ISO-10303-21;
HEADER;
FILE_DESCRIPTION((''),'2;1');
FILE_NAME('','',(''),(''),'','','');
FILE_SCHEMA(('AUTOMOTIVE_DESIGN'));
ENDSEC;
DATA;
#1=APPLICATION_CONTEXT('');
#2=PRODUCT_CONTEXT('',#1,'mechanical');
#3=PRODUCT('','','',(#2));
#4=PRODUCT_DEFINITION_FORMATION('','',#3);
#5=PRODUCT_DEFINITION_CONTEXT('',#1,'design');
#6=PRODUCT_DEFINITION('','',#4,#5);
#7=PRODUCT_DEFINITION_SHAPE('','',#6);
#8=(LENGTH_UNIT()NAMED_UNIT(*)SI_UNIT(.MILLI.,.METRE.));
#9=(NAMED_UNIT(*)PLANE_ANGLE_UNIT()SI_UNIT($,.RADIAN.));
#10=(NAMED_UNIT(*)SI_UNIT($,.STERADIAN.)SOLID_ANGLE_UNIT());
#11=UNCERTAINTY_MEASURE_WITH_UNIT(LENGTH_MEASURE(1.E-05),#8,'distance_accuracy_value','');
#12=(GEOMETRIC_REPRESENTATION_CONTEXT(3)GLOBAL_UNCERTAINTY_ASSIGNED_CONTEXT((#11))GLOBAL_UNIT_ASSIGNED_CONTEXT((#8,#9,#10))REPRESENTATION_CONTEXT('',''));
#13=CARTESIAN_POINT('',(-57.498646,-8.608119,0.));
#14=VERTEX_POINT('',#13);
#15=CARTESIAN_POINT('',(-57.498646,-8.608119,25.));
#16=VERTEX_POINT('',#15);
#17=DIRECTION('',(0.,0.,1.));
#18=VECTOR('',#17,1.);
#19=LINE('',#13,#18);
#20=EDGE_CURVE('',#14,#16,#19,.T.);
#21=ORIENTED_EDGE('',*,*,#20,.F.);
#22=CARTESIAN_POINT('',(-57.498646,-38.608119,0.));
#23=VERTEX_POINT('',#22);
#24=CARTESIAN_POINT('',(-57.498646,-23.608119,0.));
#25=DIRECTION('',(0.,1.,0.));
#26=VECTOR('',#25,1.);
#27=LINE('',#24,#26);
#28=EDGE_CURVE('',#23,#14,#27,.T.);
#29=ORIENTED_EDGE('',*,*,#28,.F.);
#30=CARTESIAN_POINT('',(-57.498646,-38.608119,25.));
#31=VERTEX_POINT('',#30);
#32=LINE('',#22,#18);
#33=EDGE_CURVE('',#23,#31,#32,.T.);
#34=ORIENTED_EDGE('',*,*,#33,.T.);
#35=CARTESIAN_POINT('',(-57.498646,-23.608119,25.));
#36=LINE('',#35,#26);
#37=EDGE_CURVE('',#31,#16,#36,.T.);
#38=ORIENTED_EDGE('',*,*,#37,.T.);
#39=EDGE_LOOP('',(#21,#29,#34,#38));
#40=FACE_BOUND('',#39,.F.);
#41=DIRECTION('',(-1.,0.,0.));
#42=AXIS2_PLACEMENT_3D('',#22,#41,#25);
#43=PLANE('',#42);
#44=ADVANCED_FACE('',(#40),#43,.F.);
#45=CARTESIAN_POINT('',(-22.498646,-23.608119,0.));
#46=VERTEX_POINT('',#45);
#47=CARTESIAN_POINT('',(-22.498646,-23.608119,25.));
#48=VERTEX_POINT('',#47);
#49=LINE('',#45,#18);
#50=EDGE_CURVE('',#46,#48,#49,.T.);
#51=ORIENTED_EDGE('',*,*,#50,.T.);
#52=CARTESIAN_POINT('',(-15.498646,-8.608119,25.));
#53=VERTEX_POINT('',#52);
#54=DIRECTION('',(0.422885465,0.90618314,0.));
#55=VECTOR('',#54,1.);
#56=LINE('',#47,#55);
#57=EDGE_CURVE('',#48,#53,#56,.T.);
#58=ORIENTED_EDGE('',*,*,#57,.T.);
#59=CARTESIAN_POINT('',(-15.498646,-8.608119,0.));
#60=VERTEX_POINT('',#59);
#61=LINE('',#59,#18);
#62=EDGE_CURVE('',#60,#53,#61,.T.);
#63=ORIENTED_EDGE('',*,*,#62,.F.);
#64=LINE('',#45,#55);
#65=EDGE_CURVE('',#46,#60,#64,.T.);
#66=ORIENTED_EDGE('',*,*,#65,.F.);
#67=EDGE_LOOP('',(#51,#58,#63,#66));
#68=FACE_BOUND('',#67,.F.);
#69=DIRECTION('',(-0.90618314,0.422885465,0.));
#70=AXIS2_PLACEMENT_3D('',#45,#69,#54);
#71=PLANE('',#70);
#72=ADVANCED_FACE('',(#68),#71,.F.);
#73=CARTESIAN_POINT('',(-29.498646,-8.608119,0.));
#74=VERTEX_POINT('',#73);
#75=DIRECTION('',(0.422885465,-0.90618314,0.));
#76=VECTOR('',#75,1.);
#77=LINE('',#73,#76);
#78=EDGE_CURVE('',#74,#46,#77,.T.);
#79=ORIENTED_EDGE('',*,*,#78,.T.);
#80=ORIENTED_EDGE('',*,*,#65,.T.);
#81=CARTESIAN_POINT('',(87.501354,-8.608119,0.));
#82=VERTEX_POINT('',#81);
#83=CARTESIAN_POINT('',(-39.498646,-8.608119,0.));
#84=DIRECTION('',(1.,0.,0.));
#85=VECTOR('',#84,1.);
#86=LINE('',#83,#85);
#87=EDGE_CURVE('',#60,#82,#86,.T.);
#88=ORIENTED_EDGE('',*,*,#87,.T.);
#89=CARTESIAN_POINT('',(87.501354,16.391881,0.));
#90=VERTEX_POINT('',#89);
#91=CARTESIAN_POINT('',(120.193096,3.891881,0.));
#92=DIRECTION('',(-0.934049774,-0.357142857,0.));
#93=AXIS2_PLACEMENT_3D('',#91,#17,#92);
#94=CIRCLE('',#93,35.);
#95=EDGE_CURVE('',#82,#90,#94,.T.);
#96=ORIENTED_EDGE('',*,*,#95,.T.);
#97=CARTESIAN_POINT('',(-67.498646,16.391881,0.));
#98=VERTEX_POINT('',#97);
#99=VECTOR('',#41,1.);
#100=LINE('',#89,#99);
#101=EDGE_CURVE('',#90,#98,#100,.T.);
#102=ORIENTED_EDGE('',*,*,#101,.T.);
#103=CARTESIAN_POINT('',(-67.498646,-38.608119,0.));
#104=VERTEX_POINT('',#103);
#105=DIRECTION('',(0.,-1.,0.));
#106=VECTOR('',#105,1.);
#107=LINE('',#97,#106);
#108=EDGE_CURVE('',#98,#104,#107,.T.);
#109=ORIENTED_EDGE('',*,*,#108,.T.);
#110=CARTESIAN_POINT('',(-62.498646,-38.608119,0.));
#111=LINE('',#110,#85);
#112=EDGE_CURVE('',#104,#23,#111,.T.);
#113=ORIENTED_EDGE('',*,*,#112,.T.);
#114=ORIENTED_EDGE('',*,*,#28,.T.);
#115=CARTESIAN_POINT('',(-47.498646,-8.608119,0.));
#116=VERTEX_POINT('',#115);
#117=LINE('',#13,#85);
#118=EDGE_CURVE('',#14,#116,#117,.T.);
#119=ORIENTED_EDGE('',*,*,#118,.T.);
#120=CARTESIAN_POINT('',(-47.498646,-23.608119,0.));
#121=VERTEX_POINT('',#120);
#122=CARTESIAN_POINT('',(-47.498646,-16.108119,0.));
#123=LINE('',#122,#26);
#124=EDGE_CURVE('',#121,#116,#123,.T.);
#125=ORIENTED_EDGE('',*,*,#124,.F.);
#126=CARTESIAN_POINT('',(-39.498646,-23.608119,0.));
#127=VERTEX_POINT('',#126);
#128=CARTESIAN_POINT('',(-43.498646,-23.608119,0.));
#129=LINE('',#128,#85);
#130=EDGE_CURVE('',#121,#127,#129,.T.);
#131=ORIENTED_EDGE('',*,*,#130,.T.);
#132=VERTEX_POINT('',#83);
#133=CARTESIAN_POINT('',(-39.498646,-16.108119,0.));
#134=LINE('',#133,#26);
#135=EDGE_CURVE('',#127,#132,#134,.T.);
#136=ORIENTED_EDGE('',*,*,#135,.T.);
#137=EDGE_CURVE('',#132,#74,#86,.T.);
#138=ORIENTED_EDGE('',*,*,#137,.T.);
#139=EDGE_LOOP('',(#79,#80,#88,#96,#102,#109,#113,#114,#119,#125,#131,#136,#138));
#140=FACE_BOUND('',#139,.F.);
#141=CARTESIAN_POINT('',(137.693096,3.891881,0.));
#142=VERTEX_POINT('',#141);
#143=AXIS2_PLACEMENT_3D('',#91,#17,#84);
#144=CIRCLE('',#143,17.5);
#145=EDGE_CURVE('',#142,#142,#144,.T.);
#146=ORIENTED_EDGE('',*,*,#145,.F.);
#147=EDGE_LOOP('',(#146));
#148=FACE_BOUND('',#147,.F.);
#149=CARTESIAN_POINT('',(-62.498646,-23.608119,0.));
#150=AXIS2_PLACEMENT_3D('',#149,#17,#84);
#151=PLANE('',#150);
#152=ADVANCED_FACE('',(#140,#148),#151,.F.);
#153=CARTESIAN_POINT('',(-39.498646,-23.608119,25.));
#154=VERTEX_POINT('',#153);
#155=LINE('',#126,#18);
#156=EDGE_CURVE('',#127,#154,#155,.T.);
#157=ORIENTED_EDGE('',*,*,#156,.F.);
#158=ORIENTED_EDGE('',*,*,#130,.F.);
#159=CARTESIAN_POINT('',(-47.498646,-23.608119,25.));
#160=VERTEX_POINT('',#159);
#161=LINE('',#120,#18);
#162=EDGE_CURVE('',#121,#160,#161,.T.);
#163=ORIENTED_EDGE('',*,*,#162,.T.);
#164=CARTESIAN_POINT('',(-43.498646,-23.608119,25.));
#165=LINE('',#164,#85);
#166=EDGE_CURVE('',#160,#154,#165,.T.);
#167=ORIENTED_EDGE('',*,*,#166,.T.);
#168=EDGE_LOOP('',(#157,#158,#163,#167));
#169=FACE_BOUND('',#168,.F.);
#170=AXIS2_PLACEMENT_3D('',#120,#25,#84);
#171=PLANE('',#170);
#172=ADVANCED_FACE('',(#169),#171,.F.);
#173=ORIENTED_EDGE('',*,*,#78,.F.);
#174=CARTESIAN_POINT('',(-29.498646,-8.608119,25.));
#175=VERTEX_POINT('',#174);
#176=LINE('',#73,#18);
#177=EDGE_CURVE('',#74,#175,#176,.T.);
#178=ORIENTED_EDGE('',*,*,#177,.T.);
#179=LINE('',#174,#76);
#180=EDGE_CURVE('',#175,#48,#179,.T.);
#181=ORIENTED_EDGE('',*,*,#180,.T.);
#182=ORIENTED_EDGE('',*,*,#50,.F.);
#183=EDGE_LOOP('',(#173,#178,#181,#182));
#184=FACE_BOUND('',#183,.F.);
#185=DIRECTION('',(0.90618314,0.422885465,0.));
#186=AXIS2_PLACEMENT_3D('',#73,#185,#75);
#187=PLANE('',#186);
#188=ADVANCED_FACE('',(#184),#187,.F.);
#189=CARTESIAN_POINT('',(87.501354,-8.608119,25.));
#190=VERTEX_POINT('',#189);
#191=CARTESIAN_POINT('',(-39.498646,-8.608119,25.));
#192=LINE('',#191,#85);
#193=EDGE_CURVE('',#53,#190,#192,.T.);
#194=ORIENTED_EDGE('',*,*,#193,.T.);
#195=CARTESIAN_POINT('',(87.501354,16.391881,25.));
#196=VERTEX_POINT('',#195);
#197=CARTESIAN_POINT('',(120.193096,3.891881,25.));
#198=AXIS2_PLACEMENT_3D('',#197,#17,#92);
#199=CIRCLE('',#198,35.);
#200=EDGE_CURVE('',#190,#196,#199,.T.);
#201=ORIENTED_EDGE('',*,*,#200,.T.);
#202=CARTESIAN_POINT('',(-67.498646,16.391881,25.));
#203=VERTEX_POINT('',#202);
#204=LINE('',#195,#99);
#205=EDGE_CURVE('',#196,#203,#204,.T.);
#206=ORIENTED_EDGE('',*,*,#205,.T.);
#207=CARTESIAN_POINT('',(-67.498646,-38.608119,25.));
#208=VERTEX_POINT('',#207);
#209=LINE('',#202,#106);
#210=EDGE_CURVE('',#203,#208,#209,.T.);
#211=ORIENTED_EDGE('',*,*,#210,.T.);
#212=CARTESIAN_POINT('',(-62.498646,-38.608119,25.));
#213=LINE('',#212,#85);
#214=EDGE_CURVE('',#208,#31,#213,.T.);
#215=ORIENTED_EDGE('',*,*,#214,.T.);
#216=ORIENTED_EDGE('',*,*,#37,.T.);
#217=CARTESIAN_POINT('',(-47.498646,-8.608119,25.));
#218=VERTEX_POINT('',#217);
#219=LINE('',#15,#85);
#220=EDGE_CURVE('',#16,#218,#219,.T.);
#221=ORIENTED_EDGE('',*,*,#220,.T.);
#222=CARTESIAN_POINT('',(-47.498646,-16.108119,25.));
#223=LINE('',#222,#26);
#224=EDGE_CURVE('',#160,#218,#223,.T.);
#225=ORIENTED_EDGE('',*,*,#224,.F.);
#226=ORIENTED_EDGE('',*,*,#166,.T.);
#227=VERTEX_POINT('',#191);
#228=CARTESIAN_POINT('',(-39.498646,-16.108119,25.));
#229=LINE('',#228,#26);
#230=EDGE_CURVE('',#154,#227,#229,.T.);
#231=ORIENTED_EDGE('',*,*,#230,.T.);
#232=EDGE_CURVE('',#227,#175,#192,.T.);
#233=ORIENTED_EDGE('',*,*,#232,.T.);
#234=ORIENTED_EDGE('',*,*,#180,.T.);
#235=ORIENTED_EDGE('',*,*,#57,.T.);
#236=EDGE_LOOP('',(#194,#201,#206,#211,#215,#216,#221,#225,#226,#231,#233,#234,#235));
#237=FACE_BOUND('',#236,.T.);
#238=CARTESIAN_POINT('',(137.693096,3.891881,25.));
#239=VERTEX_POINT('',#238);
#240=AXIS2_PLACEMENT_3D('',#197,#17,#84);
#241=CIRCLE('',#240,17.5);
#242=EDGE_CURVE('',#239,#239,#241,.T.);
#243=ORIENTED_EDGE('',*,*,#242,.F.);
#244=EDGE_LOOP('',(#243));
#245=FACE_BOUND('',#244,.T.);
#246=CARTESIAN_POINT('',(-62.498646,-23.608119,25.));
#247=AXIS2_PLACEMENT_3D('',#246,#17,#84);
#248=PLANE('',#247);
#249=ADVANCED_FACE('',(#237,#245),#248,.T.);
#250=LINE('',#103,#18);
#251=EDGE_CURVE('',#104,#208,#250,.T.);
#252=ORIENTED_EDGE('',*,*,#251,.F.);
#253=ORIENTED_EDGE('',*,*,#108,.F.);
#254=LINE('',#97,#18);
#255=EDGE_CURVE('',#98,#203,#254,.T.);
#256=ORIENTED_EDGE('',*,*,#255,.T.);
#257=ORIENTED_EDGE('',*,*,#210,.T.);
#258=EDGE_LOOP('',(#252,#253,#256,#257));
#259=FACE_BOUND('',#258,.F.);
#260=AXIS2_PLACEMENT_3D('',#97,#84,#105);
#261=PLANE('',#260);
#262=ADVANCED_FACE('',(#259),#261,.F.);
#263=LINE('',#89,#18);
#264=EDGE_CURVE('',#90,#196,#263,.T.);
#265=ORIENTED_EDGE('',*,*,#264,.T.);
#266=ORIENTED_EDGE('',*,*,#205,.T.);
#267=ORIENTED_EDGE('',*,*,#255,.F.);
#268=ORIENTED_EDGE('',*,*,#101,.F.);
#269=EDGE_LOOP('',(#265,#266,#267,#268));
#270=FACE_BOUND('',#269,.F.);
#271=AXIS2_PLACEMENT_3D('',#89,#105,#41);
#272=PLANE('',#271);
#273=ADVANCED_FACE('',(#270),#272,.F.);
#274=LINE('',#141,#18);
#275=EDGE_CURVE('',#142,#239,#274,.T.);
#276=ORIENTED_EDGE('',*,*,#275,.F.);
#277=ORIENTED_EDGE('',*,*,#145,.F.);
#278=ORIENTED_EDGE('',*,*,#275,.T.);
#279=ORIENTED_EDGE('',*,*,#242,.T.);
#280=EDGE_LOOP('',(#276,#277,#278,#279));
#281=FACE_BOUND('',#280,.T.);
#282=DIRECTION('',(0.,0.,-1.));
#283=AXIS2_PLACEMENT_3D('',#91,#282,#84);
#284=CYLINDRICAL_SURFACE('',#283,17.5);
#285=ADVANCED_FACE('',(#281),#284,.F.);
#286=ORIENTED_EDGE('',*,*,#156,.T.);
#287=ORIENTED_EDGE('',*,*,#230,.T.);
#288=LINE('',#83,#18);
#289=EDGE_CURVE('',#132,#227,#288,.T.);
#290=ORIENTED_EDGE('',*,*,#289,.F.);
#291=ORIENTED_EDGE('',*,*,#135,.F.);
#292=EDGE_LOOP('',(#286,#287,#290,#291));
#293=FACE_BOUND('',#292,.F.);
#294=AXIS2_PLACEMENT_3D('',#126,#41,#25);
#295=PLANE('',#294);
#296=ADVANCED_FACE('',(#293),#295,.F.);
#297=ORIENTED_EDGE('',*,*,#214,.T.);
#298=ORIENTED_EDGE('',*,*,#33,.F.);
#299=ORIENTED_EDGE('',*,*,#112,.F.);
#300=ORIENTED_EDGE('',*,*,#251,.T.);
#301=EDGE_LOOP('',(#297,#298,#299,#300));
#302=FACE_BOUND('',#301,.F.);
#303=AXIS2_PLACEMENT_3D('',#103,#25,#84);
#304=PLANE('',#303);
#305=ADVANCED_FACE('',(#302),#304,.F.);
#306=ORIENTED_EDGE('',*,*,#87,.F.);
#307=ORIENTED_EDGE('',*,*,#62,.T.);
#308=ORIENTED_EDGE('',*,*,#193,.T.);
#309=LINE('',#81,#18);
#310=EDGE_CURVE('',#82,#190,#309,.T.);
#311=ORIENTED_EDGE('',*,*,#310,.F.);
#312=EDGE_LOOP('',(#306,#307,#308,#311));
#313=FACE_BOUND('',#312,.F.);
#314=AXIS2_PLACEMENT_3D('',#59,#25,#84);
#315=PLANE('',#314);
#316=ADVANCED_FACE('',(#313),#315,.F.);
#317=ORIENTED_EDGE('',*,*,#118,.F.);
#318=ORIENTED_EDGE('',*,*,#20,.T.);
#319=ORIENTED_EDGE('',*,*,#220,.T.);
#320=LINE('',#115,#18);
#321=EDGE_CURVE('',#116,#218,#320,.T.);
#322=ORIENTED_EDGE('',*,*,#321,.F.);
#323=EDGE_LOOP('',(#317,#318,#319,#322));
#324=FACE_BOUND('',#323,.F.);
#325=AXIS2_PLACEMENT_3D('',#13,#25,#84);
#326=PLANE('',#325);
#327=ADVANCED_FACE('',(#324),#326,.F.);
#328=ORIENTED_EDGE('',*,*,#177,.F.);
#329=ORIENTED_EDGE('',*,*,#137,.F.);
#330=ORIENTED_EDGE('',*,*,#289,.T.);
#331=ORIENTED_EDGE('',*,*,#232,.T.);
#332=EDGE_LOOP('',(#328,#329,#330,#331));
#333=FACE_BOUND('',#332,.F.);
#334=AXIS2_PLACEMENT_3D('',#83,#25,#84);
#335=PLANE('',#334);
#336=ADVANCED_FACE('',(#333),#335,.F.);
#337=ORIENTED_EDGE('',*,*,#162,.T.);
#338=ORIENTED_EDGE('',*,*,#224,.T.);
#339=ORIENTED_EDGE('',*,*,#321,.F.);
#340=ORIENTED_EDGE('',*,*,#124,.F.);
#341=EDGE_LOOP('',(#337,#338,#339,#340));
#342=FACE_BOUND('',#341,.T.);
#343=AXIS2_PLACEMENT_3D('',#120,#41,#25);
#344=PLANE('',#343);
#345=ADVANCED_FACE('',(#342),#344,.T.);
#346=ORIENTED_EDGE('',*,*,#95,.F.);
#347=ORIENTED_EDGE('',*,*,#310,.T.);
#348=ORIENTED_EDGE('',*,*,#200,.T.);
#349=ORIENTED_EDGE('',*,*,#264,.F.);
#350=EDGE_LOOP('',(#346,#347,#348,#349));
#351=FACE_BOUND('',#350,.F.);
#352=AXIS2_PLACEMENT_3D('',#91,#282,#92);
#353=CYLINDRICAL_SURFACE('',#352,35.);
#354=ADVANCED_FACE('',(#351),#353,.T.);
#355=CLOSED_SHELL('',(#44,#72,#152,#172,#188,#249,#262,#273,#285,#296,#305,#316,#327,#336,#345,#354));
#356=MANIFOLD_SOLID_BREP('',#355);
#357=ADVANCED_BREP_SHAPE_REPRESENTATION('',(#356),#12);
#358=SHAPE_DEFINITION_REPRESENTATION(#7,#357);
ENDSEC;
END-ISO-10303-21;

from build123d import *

# Parameters (mm, degrees)
F0_W     = 10
F0_H     = 30
F0_W_2   = 8
F0_H_2   = 15
F0_R     = 17.5
F1_DEPTH = 25


# Not quite as in the source:
# - a feature of the source that left no trace in its solid (it failed there, or was rolled back) is left out


with BuildPart() as f1:
    # F0 (on Top) → F1 (new body)
    with BuildSketch(Plane.XY):
        with Locations((-62.4986458628, -23.6081185268)):
            Rectangle(F0_W, F0_H)
        with Locations((-43.4986458628, -16.1081185268)):
            Rectangle(F0_W_2, F0_H_2)
        Polygon((87.5013541372, 16.3918814732), (-67.4986458628, 16.3918814732), (-67.4986458628, -8.6081185268), (-57.4986458628, -8.6081185268), (-47.4986458628, -8.6081185268), (-39.4986458628, -8.6081185268), (-29.4986458628, -8.6081185268), (-15.4986458628, -8.6081185268), (87.5013541372, -8.6081185268), align=None)
        Polygon((-22.4986458628, -23.6081185268), (-15.4986458628, -8.6081185268), (-29.4986458628, -8.6081185268), align=None)
        with BuildLine():
            ThreePointArc((87.5013541372, -8.6081185268), (155.1930962138, 3.8918814732), (87.5013541372, 16.3918814732))
            Line((87.5013541372, 16.3918814732), (87.5013541372, -8.6081185268))
        make_face()
        with Locations((120.1930962138, 3.8918814732)):
            Circle(F0_R, mode=Mode.SUBTRACT)
    extrude(amount=F1_DEPTH)


solid = f1.part
